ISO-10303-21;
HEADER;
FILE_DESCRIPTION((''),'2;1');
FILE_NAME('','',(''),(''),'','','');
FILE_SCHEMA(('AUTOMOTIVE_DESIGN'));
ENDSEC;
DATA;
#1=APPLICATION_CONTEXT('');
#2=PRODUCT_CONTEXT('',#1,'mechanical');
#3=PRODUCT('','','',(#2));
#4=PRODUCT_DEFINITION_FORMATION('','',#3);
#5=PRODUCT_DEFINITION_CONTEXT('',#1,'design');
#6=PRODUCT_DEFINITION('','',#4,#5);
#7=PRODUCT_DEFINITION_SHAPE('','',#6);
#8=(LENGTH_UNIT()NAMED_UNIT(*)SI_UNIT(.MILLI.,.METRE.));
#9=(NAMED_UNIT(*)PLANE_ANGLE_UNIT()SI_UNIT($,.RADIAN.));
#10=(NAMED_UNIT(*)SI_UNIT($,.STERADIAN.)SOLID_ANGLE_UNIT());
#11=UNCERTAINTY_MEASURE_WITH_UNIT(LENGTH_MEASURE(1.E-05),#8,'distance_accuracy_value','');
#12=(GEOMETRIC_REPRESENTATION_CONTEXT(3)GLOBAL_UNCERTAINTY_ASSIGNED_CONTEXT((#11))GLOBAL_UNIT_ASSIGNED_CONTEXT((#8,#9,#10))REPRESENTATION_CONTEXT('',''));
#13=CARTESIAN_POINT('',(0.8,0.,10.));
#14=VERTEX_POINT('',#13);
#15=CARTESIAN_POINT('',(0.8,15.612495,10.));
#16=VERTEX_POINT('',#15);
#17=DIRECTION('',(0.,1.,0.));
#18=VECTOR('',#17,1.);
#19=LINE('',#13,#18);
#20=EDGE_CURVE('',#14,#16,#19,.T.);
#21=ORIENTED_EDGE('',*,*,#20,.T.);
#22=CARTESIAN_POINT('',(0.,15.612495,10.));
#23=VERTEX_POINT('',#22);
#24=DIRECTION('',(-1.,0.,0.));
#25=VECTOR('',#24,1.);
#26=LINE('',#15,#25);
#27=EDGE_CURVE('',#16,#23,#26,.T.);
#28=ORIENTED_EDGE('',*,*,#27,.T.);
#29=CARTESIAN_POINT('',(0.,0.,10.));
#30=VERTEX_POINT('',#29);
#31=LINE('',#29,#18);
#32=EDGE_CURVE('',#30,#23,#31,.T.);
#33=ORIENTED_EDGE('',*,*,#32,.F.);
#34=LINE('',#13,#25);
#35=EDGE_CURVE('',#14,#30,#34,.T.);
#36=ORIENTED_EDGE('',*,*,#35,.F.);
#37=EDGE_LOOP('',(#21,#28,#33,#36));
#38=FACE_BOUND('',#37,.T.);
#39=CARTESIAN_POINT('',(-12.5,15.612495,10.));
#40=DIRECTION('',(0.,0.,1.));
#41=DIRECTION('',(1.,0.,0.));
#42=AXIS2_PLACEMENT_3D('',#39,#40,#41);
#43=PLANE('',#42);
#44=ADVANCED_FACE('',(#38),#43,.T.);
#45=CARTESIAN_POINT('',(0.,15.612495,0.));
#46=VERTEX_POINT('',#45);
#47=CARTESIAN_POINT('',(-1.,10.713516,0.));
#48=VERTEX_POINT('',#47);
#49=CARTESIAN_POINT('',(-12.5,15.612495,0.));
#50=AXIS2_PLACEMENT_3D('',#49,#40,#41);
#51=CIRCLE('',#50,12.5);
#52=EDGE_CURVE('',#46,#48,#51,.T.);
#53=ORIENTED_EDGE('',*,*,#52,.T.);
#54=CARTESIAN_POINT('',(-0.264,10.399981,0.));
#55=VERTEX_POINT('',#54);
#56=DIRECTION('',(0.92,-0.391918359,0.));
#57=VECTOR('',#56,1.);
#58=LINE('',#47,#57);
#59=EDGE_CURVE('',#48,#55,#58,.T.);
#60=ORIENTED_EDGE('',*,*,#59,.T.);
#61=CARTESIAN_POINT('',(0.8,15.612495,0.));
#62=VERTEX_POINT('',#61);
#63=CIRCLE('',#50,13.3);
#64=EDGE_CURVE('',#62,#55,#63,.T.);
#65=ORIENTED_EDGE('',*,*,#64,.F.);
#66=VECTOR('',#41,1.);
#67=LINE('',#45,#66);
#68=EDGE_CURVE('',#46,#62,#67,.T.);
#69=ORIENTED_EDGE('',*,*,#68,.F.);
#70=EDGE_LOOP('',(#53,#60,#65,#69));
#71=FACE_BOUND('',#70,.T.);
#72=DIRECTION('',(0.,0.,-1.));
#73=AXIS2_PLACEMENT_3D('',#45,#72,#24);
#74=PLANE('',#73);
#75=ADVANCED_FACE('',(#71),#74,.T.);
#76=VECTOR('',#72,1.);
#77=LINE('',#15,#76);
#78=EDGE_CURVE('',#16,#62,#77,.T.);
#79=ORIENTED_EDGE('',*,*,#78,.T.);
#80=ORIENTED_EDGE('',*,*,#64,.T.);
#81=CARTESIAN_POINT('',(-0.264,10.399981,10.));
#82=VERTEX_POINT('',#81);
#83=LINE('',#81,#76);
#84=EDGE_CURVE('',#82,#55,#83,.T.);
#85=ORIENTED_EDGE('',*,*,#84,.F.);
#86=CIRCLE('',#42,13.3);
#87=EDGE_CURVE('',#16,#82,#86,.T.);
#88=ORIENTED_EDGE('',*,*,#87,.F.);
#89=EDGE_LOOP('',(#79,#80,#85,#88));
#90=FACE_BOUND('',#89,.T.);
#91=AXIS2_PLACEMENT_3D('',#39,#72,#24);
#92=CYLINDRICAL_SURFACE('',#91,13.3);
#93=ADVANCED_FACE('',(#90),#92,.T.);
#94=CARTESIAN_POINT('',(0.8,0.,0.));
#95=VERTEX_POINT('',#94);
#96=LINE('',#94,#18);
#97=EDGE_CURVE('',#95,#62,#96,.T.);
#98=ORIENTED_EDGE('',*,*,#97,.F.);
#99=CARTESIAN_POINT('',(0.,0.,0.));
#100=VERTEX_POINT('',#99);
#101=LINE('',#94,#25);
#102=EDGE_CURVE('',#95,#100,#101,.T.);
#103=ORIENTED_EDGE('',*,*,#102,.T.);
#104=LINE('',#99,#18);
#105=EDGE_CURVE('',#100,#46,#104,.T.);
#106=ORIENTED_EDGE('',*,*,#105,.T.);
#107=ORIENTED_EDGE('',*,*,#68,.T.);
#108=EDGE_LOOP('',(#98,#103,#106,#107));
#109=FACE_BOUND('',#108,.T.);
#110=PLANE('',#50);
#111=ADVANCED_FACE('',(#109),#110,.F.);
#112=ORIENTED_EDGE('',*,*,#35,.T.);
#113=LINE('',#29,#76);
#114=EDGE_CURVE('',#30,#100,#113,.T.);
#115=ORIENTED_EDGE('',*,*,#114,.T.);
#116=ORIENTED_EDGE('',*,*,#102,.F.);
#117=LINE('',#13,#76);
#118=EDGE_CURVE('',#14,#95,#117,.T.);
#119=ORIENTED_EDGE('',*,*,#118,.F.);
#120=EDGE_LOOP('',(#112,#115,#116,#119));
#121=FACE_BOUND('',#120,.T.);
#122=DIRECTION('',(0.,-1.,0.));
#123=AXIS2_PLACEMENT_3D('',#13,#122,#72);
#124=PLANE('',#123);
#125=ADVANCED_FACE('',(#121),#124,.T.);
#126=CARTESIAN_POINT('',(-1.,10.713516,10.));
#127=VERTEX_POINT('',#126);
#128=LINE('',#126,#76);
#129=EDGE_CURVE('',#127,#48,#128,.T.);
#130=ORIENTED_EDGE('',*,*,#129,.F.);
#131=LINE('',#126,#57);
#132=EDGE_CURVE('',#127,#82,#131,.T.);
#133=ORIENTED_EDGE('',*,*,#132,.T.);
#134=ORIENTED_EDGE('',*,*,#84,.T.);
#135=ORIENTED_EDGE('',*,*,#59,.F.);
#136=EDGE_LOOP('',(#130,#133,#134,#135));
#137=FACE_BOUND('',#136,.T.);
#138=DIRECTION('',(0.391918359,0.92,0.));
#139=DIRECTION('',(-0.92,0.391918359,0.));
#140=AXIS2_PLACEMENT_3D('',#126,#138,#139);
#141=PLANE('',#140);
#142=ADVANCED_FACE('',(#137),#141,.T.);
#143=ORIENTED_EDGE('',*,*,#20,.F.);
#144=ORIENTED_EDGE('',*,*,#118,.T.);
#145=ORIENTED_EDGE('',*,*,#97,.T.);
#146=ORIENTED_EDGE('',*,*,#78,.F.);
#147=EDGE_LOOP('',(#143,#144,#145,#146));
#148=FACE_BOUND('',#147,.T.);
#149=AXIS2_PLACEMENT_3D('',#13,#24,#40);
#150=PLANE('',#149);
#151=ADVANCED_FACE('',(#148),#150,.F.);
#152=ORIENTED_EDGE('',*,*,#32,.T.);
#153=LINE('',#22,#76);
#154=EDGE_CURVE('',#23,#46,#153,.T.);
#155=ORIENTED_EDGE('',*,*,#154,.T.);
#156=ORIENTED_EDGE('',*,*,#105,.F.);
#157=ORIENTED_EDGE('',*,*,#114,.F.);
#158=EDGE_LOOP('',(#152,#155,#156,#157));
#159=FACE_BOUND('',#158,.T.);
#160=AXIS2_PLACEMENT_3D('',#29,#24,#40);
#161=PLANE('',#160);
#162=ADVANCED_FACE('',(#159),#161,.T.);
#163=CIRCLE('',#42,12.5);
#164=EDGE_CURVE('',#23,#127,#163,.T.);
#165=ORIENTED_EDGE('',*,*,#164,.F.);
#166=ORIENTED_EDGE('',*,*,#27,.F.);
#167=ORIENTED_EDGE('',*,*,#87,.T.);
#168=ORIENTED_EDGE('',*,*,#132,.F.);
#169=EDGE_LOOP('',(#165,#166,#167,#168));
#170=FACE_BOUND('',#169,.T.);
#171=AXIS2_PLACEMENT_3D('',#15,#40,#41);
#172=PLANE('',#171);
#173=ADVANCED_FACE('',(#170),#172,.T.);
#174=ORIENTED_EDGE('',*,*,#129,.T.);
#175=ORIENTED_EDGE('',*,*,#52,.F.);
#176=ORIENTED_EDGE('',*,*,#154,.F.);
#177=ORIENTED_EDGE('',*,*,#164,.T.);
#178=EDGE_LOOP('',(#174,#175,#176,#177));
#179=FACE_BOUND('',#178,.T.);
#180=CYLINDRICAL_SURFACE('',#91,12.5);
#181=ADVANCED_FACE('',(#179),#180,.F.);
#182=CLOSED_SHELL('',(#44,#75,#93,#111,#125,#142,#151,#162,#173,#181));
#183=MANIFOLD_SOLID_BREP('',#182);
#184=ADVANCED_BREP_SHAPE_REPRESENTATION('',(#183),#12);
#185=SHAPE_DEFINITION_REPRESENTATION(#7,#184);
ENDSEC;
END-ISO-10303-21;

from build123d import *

# Parameters (mm, degrees)
BRIDA_BASE1_DEPTH = 10


# Sheet-metal steps are written as plain solids
with BuildPart() as part:
    # Croquis1 → Brida base1 (new body)
    with BuildSketch(Plane.XY):
        with BuildLine():
            Line((0, 0), (0, 15.612494996))
            ThreePointArc((0, 15.612494996), (-24.747448714, 18.112494996), (-1, 10.71351551))
            Line((-1, 10.71351551), (-0.264, 10.399980823))
            ThreePointArc((-0.264, 10.399980823), (-25.531285432, 18.272494996), (0.8, 15.612494996))
            Line((0.8, 15.612494996), (0.8, 0))
            Line((0.8, 0), (0, 0))
        make_face()
    extrude(amount=BRIDA_BASE1_DEPTH)


solid = part.part
